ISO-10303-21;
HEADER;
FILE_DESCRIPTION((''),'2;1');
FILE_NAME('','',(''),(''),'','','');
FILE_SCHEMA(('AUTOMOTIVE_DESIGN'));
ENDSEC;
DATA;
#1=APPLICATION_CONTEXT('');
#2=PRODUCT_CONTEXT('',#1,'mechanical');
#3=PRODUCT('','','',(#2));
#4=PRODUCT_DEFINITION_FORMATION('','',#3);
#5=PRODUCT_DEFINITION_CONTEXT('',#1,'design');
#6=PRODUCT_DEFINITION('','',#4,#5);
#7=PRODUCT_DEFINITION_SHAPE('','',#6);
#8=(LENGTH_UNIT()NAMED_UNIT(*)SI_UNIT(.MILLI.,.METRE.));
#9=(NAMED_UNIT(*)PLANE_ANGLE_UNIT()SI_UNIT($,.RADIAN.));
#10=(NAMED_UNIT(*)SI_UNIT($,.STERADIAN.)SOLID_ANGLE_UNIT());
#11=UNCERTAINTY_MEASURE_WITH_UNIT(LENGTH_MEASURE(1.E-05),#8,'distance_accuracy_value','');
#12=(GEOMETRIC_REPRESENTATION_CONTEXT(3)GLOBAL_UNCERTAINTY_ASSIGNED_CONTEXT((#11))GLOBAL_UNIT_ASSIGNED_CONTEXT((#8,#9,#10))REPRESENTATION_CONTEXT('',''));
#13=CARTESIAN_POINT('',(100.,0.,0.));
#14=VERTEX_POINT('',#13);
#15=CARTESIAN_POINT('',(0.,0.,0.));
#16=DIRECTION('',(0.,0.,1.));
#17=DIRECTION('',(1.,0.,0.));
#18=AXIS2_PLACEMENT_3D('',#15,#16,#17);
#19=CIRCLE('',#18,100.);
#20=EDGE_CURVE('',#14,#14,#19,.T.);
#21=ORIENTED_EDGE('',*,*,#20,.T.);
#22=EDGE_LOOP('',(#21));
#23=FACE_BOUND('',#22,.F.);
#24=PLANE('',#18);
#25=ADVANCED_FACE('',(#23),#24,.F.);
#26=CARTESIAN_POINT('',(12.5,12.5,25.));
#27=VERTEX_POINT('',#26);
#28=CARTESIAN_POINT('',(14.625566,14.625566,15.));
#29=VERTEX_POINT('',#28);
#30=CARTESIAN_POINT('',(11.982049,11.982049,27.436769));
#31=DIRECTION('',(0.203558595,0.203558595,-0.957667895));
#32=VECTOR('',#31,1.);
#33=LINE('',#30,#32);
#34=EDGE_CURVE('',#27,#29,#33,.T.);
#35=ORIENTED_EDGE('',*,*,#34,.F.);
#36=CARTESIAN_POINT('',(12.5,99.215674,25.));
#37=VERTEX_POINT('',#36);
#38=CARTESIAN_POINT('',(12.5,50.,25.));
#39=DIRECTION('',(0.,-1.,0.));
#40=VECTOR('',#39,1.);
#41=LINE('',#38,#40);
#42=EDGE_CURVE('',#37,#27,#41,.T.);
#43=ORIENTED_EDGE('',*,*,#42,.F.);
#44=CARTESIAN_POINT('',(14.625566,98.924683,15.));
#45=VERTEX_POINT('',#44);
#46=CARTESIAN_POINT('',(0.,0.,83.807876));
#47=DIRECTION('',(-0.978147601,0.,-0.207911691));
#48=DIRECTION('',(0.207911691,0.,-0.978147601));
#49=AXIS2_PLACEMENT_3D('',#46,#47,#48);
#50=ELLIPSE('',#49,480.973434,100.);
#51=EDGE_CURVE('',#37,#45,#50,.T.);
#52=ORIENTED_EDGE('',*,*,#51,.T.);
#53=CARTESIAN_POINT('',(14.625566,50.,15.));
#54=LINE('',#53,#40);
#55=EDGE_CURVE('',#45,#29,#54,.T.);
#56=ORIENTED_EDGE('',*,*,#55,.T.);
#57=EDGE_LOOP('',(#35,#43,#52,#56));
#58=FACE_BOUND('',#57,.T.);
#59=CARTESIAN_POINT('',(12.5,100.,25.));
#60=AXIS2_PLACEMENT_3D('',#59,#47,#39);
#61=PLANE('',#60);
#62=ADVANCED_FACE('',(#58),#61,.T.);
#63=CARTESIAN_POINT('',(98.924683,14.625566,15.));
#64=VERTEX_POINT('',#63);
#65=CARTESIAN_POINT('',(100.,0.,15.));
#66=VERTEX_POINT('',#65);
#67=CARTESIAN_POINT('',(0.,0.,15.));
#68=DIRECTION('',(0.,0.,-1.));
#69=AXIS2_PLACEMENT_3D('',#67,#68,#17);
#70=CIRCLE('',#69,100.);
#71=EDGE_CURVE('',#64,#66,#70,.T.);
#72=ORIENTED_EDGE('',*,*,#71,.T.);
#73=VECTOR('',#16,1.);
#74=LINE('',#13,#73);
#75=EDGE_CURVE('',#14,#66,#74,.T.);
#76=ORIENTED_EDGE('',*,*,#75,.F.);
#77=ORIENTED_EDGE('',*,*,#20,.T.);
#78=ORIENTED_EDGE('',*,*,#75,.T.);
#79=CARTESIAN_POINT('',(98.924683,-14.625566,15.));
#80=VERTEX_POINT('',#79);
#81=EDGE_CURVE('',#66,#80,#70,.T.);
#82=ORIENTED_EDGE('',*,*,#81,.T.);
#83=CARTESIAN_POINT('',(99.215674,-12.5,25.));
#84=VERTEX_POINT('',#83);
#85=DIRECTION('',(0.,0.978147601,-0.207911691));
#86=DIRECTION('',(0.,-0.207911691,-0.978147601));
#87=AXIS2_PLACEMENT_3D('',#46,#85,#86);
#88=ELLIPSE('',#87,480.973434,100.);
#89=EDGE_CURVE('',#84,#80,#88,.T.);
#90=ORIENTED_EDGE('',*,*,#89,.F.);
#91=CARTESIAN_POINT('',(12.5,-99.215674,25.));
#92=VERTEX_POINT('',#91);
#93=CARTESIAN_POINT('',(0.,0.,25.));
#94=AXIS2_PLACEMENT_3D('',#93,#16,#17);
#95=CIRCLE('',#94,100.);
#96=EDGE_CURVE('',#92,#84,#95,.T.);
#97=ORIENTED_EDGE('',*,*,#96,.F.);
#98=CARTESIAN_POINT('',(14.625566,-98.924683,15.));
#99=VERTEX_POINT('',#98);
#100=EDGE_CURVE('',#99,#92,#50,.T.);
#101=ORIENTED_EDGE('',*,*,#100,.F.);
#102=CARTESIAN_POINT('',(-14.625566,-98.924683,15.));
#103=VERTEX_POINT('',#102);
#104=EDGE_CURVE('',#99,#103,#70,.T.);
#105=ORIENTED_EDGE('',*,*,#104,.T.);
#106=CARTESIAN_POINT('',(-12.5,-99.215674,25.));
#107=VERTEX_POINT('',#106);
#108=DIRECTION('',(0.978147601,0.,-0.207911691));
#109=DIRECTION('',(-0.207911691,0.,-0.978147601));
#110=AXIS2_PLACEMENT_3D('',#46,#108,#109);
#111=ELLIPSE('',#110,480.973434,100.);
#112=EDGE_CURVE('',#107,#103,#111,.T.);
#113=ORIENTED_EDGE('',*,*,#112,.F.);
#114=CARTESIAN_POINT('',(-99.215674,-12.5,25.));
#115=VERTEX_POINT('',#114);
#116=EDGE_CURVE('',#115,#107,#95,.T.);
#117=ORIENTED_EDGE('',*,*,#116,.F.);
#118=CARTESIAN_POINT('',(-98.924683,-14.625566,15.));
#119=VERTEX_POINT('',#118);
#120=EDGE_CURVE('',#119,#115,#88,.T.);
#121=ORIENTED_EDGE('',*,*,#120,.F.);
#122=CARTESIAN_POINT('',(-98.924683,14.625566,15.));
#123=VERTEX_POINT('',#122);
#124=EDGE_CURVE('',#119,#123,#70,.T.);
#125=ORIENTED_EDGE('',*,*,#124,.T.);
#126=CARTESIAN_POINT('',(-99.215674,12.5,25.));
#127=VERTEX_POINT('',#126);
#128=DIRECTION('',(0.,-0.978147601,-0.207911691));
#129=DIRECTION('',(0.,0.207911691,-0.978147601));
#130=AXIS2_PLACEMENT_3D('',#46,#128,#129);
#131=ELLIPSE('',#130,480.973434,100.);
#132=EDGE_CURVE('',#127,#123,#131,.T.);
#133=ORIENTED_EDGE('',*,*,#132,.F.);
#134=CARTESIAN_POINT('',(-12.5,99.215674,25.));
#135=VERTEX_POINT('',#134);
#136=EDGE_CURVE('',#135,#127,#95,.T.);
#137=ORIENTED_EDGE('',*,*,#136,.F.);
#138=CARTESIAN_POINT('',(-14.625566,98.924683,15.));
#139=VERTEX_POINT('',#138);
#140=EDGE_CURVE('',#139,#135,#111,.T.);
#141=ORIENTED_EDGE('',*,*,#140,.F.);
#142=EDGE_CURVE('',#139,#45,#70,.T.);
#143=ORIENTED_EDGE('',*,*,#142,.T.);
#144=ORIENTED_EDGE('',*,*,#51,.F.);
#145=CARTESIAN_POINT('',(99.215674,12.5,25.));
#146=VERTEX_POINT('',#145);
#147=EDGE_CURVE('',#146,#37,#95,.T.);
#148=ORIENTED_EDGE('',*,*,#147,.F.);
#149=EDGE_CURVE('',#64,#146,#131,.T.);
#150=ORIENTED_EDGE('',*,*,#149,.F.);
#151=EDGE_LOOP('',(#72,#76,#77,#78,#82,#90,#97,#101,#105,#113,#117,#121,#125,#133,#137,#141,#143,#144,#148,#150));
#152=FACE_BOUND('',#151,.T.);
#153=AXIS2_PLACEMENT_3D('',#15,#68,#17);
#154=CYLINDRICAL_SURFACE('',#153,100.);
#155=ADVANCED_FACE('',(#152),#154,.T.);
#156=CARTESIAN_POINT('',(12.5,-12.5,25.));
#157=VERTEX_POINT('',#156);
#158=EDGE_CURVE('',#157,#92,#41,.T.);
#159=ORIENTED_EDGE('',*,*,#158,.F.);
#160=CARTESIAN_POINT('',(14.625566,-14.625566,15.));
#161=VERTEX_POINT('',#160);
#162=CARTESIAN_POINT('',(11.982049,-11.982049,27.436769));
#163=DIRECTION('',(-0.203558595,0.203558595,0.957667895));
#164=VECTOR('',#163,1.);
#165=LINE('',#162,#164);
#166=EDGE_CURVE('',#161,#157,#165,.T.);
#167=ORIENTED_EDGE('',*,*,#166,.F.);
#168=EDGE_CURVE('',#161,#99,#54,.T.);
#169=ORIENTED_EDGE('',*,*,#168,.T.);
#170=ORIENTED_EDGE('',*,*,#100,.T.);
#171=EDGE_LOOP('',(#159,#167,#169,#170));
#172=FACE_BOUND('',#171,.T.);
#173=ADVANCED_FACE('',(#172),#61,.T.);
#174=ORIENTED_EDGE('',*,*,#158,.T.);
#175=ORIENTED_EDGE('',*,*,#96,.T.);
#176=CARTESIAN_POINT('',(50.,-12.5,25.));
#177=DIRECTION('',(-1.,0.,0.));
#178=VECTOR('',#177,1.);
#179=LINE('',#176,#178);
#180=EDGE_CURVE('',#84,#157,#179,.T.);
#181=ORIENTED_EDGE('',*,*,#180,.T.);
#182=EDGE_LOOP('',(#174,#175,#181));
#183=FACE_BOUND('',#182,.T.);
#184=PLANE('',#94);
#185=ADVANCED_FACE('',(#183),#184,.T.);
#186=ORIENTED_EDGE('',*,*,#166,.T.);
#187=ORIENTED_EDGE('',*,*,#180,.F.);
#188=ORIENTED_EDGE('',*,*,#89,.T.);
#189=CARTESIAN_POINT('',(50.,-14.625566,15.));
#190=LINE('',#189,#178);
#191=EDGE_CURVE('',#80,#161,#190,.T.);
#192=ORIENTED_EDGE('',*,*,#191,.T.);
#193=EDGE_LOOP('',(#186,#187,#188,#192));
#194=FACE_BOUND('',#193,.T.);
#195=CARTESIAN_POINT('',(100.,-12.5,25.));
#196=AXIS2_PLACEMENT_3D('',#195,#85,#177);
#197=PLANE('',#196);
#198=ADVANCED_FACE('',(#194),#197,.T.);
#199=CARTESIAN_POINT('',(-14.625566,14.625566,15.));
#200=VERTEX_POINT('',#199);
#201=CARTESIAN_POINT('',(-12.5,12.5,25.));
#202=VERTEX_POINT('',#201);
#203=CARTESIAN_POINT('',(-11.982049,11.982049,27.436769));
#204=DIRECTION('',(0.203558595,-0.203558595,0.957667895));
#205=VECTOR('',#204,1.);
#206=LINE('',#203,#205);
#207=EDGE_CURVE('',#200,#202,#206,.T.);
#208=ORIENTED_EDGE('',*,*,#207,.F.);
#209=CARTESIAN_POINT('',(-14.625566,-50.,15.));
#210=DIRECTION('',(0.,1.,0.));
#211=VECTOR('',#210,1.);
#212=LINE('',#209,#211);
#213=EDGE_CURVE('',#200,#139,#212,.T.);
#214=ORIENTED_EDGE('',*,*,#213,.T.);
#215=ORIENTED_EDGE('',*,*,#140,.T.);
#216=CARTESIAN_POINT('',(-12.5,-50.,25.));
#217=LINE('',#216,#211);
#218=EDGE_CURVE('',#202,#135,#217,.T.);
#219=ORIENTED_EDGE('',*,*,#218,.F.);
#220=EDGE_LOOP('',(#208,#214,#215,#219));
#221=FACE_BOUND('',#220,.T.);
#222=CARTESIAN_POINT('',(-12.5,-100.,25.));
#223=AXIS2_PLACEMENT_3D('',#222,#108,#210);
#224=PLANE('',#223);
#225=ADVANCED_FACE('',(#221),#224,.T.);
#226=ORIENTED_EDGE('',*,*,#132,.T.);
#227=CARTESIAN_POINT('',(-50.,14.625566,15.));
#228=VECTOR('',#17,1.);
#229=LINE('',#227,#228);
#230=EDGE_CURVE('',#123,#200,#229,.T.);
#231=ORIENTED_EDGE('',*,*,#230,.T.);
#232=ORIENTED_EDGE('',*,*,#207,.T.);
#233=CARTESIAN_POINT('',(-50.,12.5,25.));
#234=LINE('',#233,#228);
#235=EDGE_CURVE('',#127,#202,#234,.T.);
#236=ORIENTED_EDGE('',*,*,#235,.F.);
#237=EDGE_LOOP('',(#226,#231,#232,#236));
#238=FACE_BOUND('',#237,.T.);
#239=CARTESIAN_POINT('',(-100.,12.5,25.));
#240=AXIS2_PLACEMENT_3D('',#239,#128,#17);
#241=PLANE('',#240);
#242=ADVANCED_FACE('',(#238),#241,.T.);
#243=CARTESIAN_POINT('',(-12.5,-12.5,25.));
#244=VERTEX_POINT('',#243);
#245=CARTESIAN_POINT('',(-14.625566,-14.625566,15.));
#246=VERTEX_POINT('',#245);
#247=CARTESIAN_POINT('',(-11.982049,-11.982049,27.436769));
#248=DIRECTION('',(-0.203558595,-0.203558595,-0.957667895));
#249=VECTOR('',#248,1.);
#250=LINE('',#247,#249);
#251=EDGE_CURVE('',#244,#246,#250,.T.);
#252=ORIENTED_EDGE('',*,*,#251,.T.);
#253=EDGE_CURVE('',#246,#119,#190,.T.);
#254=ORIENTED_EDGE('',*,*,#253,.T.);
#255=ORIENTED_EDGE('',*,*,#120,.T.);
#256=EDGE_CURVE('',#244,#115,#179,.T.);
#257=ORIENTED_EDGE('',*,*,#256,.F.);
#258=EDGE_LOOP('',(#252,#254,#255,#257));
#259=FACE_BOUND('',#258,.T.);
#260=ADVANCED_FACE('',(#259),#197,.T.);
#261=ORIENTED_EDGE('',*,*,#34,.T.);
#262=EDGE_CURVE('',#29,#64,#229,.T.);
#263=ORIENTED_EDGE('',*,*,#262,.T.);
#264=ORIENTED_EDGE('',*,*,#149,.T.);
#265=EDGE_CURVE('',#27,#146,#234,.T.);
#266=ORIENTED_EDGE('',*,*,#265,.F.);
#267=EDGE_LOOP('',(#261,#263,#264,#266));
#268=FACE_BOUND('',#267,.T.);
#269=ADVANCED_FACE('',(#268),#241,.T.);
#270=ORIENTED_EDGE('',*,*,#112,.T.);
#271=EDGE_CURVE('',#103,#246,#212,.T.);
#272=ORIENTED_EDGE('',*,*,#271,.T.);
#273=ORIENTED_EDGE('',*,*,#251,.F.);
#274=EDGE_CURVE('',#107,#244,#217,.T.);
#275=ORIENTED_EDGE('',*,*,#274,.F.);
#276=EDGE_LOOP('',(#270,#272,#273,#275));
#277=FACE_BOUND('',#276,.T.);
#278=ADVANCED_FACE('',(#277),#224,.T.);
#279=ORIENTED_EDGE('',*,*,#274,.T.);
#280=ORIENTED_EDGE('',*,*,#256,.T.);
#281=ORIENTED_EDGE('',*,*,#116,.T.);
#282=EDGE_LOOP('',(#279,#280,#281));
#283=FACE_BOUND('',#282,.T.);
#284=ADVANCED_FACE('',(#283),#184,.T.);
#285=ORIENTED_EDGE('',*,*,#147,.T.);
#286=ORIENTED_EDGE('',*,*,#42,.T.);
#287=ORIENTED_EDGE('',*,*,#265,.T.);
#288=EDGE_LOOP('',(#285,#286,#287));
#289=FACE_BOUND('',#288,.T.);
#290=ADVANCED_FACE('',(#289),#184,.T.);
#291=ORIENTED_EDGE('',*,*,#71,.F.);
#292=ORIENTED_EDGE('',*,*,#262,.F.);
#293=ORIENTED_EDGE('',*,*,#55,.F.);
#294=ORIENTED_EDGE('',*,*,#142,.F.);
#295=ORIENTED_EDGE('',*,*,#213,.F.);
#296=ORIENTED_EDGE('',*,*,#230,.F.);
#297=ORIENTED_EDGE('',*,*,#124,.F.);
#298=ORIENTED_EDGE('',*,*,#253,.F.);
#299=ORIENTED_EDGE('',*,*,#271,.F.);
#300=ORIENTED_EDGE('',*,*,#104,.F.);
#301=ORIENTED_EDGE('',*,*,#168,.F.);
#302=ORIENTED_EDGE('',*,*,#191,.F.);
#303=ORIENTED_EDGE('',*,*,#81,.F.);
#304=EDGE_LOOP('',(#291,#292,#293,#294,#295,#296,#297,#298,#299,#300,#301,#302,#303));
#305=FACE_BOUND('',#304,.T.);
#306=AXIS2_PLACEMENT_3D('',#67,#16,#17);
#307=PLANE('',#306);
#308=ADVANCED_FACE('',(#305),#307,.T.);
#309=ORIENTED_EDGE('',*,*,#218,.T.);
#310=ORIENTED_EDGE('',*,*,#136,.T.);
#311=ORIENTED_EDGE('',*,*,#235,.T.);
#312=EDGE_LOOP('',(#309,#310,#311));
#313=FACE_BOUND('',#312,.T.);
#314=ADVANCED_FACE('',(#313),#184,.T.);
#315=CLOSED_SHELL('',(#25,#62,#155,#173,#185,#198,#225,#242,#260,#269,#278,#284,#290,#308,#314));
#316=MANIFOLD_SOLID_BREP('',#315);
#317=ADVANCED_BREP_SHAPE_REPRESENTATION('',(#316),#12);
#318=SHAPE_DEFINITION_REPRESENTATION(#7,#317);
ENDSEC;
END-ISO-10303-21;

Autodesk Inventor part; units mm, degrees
ref_plane "YZ Plane" through (0, 0, 0) normal (1, 0, 0) x (0, 1, 0)
ref_plane "XZ Plane" through (0, 0, 0) normal (0, 1, 0) x (-1, 0, 0)
ref_plane "XY Plane" through (0, 0, 0) normal (0, 0, 1) x (1, 0, 0)
sketch "Sketch1" plane through (0, 0, 0) normal (0, 0, 1) x (1, 0, 0)
  circle A0 centre (0, 0) radius 100
  dimension "Dia" = 200
extrude "Extrusion1" add sketch "Sketch1" along normal blind 25
sketch "Sketch2" plane through (0, 0, 25) normal (0, 0, 1) x (1, 0, 0)
  line L0 (-100, 12.5) -> (100, 12.5)
  line L1 (100, 12.5) -> (100, -12.5)
  line L2 (100, -12.5) -> (-100, -12.5)
  line L3 (-100, -12.5) -> (-100, 12.5)
  line L4 (-100, 12.5) -> (100, -12.5) construction
  line L5 (100, 12.5) -> (-100, -12.5) construction
  point P0 (0, 0)
  dimension "d3" = 200
  dimension "d4" = 25
extrude "Extrusion2" cut sketch "Sketch2" against normal blind 10 draft 12
pattern_circular "Circular Pattern1" count 2 over 90 about axis through (0, 0, 0) along (0, 0, 1) of "Extrusion2"
equation "\"d3\" = Dia"
